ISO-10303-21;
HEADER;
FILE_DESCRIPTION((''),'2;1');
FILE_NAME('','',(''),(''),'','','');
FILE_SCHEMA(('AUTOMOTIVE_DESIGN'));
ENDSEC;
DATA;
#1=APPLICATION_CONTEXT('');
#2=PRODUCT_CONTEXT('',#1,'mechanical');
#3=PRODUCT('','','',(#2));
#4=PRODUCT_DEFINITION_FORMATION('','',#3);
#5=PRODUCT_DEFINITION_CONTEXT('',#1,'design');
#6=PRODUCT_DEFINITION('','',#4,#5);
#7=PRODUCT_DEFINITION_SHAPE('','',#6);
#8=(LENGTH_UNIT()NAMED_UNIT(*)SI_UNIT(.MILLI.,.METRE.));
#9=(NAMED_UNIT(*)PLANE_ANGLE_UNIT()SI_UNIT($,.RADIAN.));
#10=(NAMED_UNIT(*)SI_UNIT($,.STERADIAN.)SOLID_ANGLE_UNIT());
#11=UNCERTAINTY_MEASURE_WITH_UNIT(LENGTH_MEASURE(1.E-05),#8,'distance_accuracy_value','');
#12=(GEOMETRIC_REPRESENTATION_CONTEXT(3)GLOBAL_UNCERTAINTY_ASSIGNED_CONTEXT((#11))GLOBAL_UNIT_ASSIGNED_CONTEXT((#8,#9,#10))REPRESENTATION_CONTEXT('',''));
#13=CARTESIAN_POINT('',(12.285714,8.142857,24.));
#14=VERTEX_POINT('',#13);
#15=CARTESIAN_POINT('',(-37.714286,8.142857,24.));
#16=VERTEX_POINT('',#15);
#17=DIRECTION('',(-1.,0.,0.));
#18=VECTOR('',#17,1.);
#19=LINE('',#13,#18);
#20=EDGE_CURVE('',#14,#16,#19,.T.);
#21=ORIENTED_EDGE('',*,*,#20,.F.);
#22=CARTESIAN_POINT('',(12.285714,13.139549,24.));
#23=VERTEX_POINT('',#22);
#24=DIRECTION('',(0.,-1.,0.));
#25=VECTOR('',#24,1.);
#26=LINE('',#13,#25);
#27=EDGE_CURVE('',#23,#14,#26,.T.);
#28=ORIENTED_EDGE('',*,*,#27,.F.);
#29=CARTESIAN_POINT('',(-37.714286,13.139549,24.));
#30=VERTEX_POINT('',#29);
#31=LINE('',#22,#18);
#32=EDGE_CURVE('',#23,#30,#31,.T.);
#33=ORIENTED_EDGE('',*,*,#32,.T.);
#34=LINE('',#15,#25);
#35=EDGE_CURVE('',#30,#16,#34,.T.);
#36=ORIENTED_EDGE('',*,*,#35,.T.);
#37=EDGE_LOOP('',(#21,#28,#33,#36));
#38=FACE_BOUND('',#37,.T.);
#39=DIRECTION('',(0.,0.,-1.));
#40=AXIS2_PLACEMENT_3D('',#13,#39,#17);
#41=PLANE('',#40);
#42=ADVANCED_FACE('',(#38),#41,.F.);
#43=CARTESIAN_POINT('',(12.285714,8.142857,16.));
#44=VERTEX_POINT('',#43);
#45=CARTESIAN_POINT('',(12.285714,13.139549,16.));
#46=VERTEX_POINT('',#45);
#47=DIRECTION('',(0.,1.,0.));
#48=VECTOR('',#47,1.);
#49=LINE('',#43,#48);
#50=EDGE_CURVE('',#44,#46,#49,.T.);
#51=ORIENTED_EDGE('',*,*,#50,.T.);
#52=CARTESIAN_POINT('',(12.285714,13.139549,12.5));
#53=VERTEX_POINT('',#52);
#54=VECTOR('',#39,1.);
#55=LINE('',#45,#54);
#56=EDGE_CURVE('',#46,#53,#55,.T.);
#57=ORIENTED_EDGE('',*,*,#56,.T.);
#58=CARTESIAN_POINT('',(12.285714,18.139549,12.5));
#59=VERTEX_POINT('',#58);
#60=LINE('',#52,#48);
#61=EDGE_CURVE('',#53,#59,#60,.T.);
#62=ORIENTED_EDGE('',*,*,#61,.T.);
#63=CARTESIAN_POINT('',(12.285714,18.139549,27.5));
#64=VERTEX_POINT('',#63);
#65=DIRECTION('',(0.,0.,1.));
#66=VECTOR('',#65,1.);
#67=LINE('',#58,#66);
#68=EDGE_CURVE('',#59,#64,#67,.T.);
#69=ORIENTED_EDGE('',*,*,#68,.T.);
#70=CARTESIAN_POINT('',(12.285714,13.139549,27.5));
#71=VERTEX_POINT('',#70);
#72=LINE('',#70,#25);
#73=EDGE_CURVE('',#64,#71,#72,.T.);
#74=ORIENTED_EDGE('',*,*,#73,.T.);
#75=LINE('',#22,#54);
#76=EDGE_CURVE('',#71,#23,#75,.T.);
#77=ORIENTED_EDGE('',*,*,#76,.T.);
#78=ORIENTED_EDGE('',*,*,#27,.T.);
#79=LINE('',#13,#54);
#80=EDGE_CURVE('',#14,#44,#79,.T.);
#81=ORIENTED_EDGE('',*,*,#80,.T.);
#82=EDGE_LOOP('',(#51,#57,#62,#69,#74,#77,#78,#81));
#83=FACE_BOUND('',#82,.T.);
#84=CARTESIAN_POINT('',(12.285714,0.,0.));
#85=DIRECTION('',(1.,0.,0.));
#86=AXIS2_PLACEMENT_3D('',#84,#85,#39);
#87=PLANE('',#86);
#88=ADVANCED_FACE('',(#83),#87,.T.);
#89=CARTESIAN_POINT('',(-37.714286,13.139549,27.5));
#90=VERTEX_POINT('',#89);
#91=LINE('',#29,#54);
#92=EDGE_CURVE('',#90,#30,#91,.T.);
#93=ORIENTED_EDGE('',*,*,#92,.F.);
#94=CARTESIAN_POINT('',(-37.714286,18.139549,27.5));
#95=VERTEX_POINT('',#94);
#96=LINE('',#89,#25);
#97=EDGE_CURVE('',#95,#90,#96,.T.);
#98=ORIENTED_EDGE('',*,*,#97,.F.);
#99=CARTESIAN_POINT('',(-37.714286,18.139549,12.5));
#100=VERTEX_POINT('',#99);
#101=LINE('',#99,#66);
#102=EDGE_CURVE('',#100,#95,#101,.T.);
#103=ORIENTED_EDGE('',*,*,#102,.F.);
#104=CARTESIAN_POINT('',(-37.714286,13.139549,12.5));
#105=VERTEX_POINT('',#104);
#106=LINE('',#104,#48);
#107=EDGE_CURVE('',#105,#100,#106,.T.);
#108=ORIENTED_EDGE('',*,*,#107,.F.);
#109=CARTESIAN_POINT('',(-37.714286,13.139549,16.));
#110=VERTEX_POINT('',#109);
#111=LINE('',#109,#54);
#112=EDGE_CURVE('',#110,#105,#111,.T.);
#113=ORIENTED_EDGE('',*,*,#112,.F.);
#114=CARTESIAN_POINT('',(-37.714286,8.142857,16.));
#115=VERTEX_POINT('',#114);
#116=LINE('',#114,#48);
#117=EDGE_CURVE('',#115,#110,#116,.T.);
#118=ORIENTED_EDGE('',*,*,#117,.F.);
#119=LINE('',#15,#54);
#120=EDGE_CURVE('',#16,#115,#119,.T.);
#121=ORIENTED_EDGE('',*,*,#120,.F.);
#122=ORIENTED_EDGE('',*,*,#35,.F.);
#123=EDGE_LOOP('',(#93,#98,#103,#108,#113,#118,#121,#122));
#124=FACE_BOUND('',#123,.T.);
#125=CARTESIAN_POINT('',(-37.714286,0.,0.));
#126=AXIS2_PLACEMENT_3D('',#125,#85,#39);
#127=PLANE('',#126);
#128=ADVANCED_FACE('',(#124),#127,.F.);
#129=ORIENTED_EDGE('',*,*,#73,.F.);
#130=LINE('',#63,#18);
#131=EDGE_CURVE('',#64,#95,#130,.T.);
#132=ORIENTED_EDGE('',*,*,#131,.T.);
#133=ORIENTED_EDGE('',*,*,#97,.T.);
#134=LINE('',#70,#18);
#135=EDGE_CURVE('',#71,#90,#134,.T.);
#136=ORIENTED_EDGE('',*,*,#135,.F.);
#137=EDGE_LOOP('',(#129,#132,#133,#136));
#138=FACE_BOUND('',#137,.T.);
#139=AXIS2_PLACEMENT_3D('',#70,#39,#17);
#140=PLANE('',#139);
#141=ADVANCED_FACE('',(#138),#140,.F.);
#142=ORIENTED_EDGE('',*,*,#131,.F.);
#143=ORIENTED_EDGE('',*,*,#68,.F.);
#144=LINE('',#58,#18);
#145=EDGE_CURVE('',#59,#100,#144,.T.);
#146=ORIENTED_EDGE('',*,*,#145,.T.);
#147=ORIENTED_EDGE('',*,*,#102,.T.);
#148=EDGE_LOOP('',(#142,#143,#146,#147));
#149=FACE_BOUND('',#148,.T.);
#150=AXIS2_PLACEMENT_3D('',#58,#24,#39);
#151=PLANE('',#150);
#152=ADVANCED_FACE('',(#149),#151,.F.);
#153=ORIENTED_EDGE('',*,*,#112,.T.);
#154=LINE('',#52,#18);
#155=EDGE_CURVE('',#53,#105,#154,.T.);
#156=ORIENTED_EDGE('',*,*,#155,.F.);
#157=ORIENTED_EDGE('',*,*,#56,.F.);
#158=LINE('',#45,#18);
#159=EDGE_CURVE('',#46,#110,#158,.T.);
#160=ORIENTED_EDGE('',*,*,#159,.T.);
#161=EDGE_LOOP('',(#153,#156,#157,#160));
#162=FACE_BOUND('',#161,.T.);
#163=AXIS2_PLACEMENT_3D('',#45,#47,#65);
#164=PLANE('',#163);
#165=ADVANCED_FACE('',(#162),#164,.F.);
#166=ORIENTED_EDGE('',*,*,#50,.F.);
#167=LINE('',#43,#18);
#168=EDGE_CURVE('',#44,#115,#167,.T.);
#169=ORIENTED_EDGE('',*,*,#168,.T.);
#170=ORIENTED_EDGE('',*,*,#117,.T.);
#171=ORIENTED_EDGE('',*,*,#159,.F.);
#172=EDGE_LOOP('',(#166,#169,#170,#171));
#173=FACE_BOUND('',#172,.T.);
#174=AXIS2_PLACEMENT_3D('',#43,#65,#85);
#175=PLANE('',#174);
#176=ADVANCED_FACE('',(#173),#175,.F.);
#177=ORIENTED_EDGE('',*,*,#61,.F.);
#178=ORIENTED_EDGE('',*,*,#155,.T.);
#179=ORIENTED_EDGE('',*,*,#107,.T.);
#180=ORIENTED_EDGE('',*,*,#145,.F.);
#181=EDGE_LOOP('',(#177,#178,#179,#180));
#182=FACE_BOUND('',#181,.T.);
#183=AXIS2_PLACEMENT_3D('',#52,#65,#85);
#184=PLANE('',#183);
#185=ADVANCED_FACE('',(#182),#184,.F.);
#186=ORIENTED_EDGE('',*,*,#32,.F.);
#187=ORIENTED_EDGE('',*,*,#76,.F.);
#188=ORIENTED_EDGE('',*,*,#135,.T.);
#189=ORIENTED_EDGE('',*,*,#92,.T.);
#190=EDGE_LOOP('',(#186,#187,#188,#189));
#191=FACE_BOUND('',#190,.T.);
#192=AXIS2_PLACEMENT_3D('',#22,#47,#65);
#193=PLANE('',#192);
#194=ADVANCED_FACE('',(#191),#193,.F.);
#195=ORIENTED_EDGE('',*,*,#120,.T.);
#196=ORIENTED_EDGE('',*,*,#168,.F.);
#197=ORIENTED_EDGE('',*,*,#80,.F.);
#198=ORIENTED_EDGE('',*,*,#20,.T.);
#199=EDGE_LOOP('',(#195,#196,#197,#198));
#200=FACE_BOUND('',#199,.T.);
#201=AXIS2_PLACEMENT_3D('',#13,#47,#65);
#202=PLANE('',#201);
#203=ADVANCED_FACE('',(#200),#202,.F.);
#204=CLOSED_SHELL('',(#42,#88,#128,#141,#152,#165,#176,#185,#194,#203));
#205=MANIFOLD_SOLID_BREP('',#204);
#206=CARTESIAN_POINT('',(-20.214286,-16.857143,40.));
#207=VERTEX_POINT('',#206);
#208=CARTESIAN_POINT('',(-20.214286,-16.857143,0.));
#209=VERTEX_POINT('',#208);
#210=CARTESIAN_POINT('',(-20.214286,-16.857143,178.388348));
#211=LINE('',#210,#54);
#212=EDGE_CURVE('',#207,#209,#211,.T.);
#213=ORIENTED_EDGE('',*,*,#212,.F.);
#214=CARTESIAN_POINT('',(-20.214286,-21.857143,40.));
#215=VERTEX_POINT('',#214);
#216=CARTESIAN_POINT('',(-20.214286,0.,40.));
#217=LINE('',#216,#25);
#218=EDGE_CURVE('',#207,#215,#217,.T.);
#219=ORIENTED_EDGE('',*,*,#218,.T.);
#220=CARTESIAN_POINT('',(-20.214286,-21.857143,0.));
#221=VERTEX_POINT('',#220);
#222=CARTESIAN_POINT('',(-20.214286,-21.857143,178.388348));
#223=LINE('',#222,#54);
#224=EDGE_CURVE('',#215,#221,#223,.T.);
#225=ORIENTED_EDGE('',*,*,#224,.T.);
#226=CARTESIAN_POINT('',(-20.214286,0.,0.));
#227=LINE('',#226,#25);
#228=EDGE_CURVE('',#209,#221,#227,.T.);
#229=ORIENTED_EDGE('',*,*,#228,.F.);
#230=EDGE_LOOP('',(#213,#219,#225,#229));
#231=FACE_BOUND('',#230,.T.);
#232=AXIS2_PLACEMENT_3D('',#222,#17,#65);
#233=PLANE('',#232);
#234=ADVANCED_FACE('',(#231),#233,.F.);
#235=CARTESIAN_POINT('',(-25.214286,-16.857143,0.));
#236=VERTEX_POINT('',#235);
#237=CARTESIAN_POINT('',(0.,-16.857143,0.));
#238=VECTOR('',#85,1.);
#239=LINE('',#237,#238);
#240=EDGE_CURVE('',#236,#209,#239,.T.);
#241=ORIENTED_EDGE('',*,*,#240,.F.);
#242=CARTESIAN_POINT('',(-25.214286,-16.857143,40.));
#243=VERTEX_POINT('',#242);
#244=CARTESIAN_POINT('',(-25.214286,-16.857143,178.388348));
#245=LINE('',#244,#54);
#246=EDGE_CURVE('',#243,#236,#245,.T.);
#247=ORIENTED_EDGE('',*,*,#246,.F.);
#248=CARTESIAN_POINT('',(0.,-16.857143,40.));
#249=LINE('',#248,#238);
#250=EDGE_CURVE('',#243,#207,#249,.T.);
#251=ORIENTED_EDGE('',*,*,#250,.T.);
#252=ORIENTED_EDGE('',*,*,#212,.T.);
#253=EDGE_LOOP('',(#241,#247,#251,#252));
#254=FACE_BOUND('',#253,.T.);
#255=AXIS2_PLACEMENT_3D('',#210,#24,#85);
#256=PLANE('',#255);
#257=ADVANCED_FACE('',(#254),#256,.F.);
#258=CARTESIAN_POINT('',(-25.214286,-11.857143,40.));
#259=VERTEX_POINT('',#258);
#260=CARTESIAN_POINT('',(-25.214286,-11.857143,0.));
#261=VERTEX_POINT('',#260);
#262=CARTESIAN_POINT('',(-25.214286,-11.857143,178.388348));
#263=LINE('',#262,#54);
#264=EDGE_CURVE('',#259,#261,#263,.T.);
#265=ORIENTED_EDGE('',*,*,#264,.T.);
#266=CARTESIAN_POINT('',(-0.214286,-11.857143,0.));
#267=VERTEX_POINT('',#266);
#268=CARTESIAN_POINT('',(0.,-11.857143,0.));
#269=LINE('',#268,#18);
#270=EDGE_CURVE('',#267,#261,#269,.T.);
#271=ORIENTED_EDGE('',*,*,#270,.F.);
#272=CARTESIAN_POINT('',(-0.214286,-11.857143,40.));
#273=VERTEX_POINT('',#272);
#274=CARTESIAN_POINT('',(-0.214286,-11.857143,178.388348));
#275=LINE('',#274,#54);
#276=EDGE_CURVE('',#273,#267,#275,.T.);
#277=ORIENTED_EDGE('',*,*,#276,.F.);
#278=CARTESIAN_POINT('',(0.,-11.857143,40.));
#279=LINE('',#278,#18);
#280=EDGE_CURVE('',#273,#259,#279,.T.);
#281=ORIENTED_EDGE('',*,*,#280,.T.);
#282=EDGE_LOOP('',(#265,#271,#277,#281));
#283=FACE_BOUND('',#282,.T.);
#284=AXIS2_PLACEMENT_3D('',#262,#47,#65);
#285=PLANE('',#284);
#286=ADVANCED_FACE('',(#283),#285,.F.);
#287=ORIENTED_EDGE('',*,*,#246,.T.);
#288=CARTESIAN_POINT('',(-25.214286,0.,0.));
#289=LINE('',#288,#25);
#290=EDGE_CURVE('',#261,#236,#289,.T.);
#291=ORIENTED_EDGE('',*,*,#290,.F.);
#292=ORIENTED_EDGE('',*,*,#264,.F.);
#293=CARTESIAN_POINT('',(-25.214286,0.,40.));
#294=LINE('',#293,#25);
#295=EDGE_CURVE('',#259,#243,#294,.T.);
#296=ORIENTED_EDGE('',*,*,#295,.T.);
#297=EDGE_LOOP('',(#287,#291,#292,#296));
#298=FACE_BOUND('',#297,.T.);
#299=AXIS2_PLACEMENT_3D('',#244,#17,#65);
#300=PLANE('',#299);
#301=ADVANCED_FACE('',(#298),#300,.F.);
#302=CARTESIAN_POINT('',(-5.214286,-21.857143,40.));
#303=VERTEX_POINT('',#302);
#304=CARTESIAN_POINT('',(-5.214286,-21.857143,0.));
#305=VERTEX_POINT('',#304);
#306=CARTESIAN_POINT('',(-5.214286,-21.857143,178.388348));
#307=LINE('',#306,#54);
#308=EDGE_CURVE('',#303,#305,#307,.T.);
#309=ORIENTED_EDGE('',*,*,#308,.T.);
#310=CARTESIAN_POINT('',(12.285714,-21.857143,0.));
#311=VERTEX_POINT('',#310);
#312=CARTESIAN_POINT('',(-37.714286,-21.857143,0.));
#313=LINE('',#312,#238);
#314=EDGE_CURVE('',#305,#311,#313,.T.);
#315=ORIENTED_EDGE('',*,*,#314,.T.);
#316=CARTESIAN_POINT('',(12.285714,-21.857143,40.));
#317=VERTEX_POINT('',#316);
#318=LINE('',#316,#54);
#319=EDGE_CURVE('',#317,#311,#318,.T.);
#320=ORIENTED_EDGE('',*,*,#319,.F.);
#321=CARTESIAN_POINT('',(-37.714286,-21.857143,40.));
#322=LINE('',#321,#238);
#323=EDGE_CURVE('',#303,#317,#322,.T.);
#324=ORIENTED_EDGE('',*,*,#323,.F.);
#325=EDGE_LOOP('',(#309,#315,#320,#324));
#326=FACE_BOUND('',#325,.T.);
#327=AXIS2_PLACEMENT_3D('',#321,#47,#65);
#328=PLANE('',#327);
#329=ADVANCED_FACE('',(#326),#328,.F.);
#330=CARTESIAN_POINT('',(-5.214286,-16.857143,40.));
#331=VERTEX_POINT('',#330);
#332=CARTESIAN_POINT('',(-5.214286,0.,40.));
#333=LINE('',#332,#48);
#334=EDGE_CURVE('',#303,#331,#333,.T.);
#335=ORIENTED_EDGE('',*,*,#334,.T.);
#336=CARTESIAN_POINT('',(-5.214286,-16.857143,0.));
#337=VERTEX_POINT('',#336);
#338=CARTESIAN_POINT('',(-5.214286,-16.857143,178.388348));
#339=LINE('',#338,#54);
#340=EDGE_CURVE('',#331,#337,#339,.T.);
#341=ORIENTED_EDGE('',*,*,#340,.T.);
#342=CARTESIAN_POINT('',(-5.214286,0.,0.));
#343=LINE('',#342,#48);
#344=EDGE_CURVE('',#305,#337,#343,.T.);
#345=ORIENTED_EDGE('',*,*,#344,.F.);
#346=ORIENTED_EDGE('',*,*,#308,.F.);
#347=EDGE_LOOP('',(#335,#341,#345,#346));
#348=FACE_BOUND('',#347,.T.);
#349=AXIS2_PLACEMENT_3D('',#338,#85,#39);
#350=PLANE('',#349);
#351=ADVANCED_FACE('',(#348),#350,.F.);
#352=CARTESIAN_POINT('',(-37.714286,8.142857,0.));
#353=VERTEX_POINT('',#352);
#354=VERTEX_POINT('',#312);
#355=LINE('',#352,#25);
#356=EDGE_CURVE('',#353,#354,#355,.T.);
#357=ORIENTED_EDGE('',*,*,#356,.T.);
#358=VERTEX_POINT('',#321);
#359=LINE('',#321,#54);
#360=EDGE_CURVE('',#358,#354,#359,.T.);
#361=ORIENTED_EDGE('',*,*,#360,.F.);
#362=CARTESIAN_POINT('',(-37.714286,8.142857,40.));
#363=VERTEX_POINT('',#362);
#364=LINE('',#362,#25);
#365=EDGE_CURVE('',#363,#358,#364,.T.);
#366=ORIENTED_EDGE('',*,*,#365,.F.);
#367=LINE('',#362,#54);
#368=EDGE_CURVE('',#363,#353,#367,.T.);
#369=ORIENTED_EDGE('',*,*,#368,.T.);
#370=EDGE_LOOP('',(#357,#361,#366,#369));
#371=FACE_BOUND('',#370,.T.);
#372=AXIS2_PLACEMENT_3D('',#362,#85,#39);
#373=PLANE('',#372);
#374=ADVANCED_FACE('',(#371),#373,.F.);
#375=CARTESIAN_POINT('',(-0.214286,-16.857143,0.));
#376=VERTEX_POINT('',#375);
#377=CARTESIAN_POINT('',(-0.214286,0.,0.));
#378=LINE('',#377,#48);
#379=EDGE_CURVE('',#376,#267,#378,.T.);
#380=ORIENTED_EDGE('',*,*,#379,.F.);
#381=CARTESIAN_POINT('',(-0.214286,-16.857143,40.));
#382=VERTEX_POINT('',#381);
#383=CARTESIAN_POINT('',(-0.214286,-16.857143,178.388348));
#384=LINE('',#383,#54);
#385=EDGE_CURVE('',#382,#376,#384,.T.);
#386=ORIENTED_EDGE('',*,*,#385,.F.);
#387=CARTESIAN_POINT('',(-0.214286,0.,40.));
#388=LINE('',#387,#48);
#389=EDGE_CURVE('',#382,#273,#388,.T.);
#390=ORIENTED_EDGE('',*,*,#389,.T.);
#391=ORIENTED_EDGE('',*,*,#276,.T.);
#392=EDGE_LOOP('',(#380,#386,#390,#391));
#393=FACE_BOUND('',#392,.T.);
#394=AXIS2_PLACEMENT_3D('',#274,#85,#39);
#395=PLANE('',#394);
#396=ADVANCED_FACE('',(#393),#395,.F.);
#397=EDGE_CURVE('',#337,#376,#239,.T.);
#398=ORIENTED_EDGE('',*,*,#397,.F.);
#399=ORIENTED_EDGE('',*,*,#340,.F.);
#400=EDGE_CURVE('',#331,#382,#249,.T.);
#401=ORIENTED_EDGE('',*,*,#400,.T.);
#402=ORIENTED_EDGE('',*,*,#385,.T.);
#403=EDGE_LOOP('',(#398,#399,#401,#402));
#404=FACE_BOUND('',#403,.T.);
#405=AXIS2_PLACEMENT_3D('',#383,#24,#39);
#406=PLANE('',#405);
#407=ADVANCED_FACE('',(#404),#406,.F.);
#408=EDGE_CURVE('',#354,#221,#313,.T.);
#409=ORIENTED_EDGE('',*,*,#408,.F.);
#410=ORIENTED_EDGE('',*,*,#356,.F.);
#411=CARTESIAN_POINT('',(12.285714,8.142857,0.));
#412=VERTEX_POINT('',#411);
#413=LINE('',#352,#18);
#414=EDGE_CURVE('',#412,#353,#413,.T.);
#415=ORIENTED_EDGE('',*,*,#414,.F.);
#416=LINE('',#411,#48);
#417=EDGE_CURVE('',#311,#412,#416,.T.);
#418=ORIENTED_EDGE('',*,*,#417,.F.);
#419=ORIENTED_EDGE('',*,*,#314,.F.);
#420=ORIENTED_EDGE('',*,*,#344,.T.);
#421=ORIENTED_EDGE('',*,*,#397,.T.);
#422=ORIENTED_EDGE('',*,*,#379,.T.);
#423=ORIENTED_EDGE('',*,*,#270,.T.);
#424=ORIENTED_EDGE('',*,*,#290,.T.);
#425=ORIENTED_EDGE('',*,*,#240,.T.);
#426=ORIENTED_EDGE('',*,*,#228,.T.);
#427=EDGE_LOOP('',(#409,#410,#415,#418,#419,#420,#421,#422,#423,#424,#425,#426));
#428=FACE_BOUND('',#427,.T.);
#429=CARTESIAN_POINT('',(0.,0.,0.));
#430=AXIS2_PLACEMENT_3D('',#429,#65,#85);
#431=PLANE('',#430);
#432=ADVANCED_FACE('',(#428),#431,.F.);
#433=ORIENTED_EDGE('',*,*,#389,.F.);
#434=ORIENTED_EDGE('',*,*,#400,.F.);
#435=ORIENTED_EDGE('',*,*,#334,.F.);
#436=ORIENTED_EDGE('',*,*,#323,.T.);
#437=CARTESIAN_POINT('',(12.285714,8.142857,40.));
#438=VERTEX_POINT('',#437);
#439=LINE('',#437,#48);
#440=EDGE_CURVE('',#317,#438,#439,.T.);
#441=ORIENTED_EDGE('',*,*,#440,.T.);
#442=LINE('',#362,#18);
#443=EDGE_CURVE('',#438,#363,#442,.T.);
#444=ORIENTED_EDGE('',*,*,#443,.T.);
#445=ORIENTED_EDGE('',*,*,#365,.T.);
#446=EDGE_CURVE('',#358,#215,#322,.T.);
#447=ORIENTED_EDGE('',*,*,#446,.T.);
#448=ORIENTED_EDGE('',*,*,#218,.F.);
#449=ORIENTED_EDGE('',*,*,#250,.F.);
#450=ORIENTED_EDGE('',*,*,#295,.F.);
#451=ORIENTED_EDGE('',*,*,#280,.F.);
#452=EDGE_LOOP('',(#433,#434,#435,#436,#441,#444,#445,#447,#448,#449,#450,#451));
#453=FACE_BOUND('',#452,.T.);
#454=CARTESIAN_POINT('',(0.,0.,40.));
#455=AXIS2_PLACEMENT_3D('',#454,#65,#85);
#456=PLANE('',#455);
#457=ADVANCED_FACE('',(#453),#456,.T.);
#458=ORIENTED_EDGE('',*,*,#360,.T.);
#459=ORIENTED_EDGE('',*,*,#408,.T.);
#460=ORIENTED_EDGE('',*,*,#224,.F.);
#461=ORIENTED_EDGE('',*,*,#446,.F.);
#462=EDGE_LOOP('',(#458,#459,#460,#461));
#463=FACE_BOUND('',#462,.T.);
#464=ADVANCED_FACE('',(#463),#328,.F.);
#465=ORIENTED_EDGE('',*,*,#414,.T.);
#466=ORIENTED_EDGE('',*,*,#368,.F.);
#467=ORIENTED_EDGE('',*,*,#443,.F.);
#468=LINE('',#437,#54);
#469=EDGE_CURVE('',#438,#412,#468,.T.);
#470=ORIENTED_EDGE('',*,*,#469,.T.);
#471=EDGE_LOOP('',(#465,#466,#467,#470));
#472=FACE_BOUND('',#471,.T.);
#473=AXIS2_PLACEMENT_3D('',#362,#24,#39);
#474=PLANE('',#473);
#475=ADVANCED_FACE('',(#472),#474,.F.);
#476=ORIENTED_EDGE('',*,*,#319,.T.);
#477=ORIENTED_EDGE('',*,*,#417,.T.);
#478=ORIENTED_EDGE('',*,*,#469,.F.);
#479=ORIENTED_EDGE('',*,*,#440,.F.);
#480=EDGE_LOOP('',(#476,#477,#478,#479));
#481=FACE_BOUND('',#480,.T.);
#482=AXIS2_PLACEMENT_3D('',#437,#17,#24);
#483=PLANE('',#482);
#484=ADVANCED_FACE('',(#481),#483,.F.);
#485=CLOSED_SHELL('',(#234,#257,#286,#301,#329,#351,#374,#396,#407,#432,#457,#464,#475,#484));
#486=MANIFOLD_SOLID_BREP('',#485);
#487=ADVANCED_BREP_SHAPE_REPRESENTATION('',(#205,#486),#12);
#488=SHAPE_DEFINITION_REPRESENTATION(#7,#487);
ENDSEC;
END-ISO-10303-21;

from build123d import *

# Parameters (mm, degrees)
SKETCH1_W                = 50
SKETCH1_H                = 30
BOSS_EXTRUDE1_DEPTH      = 40
CUT_EXTRUDE12_START      = -40
CUT_EXTRUDE12_DEPTH      = 40
BOSS_EXTRUDE2_DEPTH      = 12.285714
BOSS_EXTRUDE2_DEPTH_BACK = 37.714286


# Read off the part's stored shape, not the designer's step: Cut-Extrude12
with BuildPart() as part:
    # Sketch1 → Boss-Extrude1 (new body)
    with BuildSketch(Plane.XY):
        with Locations((-12.714285714, -6.857142857)):
            Rectangle(SKETCH1_W, SKETCH1_H)
    extrude(amount=BOSS_EXTRUDE1_DEPTH)

    # Cut-Extrude12 outline → Cut-Extrude12 (cut)
    with BuildSketch(Plane.XY.offset(40).offset(CUT_EXTRUDE12_START)):
        Polygon((-25.214285714, -16.857142857), (-20.214285714, -16.857142857), (-20.214285714, -21.857142857), (-5.214285714, -21.857142857), (-5.214285714, -16.857142857), (-0.214285714, -16.857142857), (-0.214285714, -11.857142857), (-25.214285714, -11.857142857), align=None)
    extrude(amount=CUT_EXTRUDE12_DEPTH, mode=Mode.SUBTRACT)


with BuildPart() as body_2:
    # Sketch3 → Boss-Extrude2 (new, two sides: drawn at the far end of the back side and taken through both)
    with BuildSketch(Plane(origin=(0, 0, 0), x_dir=(0, 0, -1), z_dir=(1, 0, 0)).offset(-BOSS_EXTRUDE2_DEPTH_BACK)):
        Polygon((-24, 8.142857143), (-16, 8.142857143), (-16, 13.139548849), (-12.5, 13.139548849), (-12.5, 18.139548849), (-27.5, 18.139548849), (-27.5, 13.139548849), (-24, 13.139548849), align=None)
    extrude(amount=BOSS_EXTRUDE2_DEPTH + BOSS_EXTRUDE2_DEPTH_BACK)


solid = Compound([part.part, body_2.part])
